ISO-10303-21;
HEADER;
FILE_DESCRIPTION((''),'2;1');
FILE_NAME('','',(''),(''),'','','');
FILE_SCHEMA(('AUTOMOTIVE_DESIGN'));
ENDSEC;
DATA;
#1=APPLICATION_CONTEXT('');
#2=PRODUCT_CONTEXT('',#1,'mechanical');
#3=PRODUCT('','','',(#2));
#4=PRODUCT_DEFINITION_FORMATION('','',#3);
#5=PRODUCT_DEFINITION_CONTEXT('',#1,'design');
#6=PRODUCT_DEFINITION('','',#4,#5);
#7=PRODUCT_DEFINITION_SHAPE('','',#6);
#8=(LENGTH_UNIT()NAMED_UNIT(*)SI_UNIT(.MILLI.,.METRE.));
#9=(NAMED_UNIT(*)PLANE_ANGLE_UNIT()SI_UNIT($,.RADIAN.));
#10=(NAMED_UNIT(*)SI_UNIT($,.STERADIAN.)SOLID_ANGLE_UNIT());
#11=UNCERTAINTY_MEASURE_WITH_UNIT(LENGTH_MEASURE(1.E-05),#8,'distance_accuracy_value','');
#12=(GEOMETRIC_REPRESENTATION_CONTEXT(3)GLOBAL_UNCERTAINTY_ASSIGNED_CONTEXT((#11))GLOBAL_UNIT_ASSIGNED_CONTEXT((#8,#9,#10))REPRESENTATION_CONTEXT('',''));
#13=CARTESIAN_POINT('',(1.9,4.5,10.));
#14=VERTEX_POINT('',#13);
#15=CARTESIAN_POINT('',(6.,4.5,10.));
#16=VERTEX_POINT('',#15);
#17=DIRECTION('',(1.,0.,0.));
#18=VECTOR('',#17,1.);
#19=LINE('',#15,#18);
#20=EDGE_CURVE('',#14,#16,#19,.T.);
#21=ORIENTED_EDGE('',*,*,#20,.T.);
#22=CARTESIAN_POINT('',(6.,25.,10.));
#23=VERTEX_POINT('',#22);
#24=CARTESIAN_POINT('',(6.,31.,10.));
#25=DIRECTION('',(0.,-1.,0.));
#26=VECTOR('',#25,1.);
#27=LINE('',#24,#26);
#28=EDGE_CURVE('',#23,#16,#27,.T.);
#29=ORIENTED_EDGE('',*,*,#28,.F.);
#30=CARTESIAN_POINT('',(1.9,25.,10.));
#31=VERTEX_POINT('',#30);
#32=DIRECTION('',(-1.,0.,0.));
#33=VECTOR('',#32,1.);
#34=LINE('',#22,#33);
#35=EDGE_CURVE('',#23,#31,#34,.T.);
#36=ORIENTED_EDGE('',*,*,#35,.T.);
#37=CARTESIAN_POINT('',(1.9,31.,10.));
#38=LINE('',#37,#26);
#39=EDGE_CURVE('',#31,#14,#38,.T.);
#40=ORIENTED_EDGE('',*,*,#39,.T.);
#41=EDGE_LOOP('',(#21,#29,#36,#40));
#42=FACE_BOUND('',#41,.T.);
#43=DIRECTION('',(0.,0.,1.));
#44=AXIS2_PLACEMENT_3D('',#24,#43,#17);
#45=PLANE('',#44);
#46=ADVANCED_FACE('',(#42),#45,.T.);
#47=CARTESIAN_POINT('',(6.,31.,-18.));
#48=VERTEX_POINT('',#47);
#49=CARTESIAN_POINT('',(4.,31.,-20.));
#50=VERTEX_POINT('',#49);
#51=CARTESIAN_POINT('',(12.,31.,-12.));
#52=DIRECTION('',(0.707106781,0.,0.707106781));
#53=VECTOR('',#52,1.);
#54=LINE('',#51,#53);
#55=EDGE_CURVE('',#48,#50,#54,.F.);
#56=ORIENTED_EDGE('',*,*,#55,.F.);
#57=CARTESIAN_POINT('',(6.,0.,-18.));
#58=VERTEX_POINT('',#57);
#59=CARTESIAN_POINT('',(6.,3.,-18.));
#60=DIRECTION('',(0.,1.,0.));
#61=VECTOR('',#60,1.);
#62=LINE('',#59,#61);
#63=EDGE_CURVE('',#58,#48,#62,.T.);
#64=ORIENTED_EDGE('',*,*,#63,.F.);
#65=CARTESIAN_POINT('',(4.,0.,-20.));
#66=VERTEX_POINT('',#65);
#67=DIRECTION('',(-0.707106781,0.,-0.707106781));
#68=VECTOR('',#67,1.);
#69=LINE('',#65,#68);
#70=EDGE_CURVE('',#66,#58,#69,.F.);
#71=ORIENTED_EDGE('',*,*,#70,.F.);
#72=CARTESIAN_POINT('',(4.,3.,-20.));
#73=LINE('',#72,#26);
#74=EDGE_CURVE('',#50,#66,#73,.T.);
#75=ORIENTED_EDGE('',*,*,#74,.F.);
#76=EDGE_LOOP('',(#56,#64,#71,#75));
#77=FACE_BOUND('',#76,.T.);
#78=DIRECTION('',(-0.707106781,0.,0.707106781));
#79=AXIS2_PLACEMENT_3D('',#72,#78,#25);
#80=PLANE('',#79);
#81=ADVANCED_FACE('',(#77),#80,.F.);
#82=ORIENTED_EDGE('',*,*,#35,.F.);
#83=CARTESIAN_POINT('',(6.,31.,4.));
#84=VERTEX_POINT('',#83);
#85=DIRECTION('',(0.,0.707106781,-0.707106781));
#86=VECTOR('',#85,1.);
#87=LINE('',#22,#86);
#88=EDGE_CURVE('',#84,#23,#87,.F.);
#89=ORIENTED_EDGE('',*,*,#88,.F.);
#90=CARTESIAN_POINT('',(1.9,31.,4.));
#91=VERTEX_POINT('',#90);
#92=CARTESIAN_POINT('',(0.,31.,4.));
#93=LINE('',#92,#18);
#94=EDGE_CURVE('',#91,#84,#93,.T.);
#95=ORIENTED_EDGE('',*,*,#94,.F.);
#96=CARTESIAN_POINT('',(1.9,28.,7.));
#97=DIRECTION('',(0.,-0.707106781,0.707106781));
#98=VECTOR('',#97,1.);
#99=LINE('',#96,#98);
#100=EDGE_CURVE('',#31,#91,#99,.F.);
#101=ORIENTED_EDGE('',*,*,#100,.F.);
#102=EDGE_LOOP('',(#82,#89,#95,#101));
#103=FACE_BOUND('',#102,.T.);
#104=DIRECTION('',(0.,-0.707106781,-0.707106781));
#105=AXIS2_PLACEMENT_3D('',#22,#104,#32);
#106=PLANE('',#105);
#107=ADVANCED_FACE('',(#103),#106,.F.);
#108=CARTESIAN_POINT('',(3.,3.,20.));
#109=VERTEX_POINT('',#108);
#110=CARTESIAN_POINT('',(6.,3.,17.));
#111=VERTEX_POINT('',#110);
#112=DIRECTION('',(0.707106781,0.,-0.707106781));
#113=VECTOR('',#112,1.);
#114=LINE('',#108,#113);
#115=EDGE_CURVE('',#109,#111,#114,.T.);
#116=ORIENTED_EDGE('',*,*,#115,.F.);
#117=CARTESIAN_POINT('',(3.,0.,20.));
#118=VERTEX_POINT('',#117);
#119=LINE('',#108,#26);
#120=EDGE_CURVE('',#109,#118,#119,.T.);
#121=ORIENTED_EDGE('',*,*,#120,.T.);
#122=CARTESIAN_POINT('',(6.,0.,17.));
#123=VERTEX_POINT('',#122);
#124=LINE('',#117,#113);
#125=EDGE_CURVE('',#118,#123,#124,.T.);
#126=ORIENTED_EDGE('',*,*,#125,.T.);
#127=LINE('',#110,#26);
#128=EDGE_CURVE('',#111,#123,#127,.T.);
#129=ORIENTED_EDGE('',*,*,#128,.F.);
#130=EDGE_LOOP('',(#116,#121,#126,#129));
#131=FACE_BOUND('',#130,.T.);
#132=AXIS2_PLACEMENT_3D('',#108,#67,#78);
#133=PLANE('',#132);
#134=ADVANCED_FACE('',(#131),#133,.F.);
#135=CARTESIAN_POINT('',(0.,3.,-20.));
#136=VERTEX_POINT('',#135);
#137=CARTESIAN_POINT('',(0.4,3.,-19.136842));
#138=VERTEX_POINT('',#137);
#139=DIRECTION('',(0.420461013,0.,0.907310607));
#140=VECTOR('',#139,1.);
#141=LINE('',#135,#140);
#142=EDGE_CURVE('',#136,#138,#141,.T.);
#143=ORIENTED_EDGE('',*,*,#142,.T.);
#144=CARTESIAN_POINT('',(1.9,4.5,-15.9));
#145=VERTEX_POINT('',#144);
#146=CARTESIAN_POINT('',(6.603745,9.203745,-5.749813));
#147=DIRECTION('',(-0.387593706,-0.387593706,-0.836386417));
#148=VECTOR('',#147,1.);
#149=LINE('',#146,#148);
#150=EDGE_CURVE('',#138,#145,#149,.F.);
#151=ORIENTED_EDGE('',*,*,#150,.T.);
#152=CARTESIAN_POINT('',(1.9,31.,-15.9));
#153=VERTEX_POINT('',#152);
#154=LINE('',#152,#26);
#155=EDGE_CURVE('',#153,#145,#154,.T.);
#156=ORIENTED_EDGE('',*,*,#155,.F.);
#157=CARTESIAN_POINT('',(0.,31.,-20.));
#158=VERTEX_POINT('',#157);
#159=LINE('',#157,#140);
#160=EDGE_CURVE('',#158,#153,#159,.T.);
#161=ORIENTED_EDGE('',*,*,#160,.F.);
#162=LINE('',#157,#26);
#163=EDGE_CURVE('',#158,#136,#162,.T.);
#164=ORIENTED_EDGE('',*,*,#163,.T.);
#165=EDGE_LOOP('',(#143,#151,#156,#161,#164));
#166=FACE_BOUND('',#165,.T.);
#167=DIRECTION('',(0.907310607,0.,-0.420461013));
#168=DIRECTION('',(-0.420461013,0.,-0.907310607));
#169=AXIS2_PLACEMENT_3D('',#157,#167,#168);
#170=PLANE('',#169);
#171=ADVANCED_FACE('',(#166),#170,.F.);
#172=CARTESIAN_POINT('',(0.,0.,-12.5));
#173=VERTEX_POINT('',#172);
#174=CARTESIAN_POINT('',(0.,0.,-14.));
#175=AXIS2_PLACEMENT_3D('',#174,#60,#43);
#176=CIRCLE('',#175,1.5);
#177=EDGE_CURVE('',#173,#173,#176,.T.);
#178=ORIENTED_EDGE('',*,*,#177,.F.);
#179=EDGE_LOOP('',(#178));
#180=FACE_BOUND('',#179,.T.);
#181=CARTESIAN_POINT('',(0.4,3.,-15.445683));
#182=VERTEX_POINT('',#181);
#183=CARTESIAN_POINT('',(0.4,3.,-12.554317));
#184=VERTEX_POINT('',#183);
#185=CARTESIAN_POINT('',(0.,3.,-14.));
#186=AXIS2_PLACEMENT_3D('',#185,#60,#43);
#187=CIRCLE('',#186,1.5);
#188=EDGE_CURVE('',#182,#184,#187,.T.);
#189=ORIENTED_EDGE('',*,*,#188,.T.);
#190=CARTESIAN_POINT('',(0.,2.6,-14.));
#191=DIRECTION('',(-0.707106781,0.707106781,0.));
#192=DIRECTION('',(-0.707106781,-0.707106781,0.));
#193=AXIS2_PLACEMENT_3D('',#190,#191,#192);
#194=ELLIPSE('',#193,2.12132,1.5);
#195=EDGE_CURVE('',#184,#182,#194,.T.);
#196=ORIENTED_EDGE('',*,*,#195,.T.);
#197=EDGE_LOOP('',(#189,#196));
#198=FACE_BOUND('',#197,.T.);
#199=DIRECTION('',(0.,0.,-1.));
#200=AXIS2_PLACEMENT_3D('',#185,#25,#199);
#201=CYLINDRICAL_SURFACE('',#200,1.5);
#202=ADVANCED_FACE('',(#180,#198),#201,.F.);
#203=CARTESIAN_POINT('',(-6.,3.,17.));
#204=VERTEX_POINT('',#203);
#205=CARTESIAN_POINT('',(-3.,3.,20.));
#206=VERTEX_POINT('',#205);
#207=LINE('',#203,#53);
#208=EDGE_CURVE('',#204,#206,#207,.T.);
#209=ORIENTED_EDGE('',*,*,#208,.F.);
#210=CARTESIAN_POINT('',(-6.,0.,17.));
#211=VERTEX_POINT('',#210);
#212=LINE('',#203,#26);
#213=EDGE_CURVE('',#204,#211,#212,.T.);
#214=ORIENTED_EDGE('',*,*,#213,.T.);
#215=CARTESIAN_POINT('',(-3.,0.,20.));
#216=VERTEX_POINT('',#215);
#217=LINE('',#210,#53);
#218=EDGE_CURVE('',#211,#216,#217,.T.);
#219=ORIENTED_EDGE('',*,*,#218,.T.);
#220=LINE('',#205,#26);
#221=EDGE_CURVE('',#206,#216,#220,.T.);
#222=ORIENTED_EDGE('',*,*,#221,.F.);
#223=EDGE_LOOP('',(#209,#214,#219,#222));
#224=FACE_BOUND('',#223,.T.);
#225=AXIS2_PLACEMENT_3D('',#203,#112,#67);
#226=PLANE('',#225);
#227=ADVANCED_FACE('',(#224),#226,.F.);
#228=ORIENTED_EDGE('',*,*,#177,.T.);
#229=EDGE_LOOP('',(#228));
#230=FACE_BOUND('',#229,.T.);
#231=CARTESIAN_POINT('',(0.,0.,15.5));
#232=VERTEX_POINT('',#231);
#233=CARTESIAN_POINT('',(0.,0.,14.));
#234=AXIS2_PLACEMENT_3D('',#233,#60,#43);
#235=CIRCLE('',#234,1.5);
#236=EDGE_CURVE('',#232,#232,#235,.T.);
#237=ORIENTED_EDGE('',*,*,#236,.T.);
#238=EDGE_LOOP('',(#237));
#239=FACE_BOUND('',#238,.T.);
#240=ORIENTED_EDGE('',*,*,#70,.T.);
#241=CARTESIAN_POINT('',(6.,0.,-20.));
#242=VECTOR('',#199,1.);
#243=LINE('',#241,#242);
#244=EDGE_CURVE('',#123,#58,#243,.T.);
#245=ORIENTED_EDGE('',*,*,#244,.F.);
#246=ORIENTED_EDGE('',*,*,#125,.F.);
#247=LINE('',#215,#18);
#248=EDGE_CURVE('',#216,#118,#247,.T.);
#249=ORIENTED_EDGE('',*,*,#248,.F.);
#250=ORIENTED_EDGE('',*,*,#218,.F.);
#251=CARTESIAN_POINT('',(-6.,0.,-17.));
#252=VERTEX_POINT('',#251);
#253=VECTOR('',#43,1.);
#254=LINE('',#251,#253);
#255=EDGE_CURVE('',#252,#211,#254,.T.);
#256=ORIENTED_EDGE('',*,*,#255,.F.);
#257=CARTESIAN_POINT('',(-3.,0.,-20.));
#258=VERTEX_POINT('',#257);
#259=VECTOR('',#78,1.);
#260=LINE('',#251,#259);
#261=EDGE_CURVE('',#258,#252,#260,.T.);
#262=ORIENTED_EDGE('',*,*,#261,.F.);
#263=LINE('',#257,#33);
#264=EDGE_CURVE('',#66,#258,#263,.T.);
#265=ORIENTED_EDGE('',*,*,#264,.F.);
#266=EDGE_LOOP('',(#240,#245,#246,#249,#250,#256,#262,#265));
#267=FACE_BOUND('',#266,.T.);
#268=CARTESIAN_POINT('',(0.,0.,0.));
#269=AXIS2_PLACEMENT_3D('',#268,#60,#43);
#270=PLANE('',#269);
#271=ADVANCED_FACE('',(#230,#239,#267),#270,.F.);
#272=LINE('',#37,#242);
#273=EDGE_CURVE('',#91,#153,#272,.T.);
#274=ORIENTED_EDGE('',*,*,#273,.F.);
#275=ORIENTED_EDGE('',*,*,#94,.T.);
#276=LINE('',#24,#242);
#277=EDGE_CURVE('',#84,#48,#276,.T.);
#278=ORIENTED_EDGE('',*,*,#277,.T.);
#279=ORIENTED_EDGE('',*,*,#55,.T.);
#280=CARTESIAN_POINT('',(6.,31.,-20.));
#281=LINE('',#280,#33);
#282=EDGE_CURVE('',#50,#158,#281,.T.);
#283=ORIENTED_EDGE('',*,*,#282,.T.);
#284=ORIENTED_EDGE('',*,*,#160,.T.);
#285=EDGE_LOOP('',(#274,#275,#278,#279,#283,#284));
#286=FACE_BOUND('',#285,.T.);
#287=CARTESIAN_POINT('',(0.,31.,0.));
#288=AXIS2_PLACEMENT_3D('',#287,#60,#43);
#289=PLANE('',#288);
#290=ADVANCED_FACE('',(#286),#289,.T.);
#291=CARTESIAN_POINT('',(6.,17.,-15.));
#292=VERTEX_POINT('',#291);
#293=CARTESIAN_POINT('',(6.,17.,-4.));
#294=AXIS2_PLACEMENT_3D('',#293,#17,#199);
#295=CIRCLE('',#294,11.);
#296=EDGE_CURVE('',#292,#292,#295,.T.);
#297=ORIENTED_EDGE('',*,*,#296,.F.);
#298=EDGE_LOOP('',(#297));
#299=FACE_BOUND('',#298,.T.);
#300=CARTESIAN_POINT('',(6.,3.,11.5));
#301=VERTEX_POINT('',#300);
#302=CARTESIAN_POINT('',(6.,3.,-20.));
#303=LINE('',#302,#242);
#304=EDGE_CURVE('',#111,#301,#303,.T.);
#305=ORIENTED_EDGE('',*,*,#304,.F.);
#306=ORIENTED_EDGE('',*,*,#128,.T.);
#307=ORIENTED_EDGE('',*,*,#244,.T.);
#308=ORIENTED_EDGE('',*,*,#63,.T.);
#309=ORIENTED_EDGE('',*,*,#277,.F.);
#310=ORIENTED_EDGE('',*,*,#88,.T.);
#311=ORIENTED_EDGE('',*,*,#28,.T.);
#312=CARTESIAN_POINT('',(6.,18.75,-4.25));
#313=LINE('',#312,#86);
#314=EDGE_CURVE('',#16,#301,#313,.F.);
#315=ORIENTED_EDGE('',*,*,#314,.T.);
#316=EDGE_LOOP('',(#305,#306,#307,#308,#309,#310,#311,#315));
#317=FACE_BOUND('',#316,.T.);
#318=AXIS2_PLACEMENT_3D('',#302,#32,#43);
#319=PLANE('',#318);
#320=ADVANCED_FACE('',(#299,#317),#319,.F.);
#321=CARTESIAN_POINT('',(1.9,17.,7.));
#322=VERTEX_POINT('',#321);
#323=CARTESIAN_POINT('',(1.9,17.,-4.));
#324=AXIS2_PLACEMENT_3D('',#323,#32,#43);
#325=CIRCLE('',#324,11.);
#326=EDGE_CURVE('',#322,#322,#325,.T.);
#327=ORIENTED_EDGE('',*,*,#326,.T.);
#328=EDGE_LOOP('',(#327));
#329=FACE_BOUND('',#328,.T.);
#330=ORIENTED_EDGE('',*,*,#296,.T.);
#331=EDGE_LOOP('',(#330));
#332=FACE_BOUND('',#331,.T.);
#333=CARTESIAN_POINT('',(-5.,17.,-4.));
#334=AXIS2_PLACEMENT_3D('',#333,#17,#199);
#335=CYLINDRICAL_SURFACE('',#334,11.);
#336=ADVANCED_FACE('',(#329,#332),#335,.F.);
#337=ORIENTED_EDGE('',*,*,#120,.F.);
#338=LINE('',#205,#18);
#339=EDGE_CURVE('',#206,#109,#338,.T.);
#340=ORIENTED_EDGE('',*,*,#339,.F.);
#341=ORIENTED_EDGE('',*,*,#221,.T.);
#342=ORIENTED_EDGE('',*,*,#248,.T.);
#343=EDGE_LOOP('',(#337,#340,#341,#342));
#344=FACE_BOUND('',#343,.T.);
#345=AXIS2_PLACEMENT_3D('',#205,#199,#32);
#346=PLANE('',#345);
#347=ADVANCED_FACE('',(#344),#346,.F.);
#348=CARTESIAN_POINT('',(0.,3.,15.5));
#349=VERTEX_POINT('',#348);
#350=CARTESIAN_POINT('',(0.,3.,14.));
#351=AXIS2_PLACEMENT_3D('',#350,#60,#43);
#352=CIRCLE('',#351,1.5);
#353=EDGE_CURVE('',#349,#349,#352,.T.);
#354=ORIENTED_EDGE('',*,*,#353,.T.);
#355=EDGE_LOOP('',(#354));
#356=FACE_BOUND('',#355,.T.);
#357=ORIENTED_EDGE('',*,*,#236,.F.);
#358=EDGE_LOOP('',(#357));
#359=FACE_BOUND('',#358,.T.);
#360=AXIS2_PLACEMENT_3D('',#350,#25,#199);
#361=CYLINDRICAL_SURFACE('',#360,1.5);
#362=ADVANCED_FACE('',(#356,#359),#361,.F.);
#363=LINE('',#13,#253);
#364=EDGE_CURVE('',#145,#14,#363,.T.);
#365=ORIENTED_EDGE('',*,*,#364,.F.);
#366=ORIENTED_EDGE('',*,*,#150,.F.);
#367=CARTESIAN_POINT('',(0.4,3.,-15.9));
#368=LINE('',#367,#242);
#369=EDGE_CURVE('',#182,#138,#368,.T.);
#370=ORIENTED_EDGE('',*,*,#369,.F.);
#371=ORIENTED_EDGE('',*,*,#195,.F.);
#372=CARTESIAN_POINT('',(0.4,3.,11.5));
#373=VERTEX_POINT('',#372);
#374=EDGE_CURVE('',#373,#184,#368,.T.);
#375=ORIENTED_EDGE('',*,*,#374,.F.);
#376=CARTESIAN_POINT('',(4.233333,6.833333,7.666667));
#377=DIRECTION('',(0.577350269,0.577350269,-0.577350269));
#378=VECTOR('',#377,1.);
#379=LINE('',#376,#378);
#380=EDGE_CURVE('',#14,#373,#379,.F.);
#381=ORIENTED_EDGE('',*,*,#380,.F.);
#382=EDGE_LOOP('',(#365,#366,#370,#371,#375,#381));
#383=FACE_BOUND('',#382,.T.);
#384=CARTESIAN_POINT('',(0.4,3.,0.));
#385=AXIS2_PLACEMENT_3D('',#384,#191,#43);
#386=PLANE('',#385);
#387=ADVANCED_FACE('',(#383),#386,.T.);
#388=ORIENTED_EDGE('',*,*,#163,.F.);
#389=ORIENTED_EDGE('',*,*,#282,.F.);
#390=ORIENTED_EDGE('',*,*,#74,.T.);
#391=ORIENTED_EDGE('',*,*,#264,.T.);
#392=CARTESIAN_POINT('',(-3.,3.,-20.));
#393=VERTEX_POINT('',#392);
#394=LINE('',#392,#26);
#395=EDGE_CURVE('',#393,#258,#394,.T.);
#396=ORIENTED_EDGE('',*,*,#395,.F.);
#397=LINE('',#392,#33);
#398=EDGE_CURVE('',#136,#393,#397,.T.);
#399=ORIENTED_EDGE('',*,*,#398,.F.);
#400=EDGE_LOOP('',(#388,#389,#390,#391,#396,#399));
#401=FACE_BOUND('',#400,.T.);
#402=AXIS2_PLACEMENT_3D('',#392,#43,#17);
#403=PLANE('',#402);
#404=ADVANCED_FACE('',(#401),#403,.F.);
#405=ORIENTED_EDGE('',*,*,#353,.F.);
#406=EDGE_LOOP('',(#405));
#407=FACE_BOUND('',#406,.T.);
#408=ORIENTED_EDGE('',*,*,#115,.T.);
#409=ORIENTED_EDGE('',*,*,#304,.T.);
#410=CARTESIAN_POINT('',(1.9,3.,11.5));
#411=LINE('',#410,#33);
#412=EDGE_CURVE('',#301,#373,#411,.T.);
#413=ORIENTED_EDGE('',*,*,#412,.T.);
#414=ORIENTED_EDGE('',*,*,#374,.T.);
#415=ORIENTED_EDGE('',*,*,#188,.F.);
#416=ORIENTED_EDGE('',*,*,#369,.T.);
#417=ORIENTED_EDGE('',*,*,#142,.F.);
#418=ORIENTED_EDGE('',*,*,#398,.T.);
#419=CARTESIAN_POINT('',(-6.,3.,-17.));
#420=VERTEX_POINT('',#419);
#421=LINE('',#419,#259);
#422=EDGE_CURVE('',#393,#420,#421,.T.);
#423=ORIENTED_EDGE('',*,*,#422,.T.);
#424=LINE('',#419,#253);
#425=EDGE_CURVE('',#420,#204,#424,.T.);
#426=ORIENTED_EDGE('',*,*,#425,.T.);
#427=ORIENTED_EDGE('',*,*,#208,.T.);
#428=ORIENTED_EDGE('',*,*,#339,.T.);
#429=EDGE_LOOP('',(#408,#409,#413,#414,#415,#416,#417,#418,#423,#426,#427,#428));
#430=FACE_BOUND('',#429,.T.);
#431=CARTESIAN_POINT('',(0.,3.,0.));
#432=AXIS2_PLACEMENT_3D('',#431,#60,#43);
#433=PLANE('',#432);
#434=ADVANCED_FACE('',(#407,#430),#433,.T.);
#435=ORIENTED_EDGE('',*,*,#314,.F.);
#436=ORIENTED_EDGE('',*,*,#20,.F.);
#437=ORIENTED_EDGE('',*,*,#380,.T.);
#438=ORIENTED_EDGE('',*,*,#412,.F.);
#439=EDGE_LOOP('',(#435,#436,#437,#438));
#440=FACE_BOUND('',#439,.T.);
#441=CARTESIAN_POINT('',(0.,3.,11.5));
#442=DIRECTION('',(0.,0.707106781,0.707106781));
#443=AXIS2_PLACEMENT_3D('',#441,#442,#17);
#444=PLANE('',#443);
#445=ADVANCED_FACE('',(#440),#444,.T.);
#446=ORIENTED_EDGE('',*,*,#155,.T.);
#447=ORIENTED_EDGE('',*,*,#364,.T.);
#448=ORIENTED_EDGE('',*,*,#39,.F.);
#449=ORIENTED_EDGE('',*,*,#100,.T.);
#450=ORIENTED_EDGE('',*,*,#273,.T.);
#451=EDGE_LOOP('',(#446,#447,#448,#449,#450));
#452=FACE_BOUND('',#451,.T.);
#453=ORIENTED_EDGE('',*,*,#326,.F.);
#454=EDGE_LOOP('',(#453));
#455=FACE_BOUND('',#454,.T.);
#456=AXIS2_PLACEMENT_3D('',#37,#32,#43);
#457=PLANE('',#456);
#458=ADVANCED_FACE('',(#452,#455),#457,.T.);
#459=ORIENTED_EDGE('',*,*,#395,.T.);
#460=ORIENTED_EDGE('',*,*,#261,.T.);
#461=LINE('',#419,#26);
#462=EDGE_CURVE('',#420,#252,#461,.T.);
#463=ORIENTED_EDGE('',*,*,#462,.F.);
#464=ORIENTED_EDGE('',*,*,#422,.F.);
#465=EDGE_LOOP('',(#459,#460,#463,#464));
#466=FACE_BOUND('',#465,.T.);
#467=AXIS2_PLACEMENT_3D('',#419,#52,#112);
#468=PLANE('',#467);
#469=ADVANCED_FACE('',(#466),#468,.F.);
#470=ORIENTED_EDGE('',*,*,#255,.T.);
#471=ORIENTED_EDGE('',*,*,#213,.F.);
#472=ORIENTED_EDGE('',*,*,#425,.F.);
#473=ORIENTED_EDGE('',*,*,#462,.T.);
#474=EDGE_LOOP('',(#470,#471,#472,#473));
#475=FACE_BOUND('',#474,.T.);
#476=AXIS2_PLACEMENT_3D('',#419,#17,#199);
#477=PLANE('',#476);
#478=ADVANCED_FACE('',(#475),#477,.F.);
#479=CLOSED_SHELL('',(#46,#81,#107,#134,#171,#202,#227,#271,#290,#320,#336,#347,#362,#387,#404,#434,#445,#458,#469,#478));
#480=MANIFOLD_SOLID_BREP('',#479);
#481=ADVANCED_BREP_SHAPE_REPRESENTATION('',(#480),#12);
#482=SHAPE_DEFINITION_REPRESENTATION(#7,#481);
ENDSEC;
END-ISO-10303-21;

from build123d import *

# Parameters (mm, degrees)
SKETCH1_R           = 1.5
BOSS_EXTRUDE1_DEPTH = 3
BOSS_EXTRUDE2_DEPTH = 28
CHAMFER1_SIZE       = 2
SKETCH4_R           = 11
CUT_EXTRUDE1_DEPTH  = 11
CHAMFER2_SIZE       = 6
CHAMFER3_SIZE       = 1.5


with BuildPart() as part:
    # Sketch1 → Boss-Extrude1 (new body)
    with BuildSketch(Plane(origin=(0, 0, 0), x_dir=(1, 0, 0), z_dir=(0, 1, 0))):
        Polygon((-6, 17), (-3, 20), (6, 20), (6, -17), (3, -20), (-3, -20), (-6, -17), align=None)
        with Locations(Location((0, 14, 0), (0, 0, 270))):
            Circle(SKETCH1_R, mode=Mode.SUBTRACT)
        with Locations(Location((0, -14, 0), (0, 0, 270))):
            Circle(SKETCH1_R, mode=Mode.SUBTRACT)
    extrude(amount=BOSS_EXTRUDE1_DEPTH)

    # Sketch2 → Boss-Extrude2 (add)
    with BuildSketch(Plane(origin=(0, 3, 0), x_dir=(1, 0, 0), z_dir=(0, 1, 0))):
        Polygon((6, -10), (6, 20), (0, 20), (1.9, 15.9), (1.9, -10), align=None)
    extrude(amount=BOSS_EXTRUDE2_DEPTH)

    # Chamfer1
    chamfer1_edges = [part.edges().sort_by_distance(p)[0] for p in [
        (6, 15.5, -20),
    ]]
    chamfer(chamfer1_edges, length=CHAMFER1_SIZE)

    # Sketch4 → Cut-Extrude1 (cut)
    with BuildSketch(Plane(origin=(6, 0, 0), x_dir=(0, 0, -1), z_dir=(1, 0, 0))):
        with Locations((4, 17)):
            Circle(SKETCH4_R)
    extrude(amount=-CUT_EXTRUDE1_DEPTH, mode=Mode.SUBTRACT)

    # Chamfer2
    chamfer2_edges = [part.edges().sort_by_distance(p)[0] for p in [
        (3.95, 31, 10),
    ]]
    chamfer(chamfer2_edges, length=CHAMFER2_SIZE)

    # Chamfer3
    # the kernel refuses this chamfer: 1.5 mm, written as the material it adds along each edge
    with BuildSketch(Plane(origin=(1.9, 3, 10), x_dir=(0, 0.9996219169112968, -0.02749587661058678), z_dir=(1, 0, 0))) as chamfer3_piece_1:
        Polygon((CHAMFER3_SIZE * 0.999621916911, CHAMFER3_SIZE * 0.0274958766106), (-CHAMFER3_SIZE * 0.0274958766106, CHAMFER3_SIZE * 0.999621916911), (0, 0), align=None)
    extrude(amount=4.1)
    with BuildSketch(Plane(origin=(1.9, 3, -19.757524482), x_dir=(0.02749587661058635, 0.9996219169112968, 0), z_dir=(0, 0, 1))) as chamfer3_piece_2_section:
        Polygon((CHAMFER3_SIZE * 0.999621916911, CHAMFER3_SIZE * 0.0274958766106), (-CHAMFER3_SIZE * 0.0274958766106, CHAMFER3_SIZE * 0.999621916911), (0, 0), align=None)
    chamfer3_piece_2 = extrude(amount=29.757524482, mode=Mode.PRIVATE)
    chamfer3_piece_2 = chamfer3_piece_2 - Plane(origin=(0, 3.553768572, -14), x_dir=(0, 0, 1), z_dir=(0, -1, 0)) * Cylinder(1.5, 66, mode=Mode.PRIVATE)
    add(chamfer3_piece_2)
    with BuildSketch(Plane(origin=(1.9, 3, -19.757524482), x_dir=(0.02749587661058635, 0.9996219169112968, 0), z_dir=(0, 0, 1))) as chamfer3_piece_3a_section:
        Polygon((CHAMFER3_SIZE * 0.999621916911, CHAMFER3_SIZE * 0.0274958766106), (-CHAMFER3_SIZE * 0.0274958766106, CHAMFER3_SIZE * 0.999621916911), (0, 0), align=None)
    chamfer3_piece_3a = extrude(amount=33.615048964, mode=Mode.PRIVATE)
    chamfer3_piece_3a = split(chamfer3_piece_3a, bisect_by=Plane(origin=(1.452851003, 3.519674643, 10), z_dir=(0, 0, 1)), keep=Keep.TOP, mode=Mode.PRIVATE)
    chamfer3_piece_3a = chamfer3_piece_3a - Plane(origin=(0, 3.519674643, 14), x_dir=(0, 0, 1), z_dir=(0, -1, 0)) * Cylinder(1.5, 74, mode=Mode.PRIVATE)
    with BuildSketch(Plane(origin=(-1.957524482, 3, 10), x_dir=(0, 0.9996219169112968, -0.02749587661058678), z_dir=(1, 0, 0))) as chamfer3_piece_3b_section:
        Polygon((CHAMFER3_SIZE * 0.999621916911, CHAMFER3_SIZE * 0.0274958766106), (-CHAMFER3_SIZE * 0.0274958766106, CHAMFER3_SIZE * 0.999621916911), (0, 0), align=None)
    chamfer3_piece_3b = extrude(amount=7.957524482, mode=Mode.PRIVATE)
    chamfer3_piece_3b = split(chamfer3_piece_3b, bisect_by=Plane(origin=(1.9, 3.49469044, 10.49469044), z_dir=(-1, 0, 0)), keep=Keep.TOP, mode=Mode.PRIVATE)
    chamfer3_piece_3 = chamfer3_piece_3a & chamfer3_piece_3b
    add(chamfer3_piece_3)


solid = part.part
